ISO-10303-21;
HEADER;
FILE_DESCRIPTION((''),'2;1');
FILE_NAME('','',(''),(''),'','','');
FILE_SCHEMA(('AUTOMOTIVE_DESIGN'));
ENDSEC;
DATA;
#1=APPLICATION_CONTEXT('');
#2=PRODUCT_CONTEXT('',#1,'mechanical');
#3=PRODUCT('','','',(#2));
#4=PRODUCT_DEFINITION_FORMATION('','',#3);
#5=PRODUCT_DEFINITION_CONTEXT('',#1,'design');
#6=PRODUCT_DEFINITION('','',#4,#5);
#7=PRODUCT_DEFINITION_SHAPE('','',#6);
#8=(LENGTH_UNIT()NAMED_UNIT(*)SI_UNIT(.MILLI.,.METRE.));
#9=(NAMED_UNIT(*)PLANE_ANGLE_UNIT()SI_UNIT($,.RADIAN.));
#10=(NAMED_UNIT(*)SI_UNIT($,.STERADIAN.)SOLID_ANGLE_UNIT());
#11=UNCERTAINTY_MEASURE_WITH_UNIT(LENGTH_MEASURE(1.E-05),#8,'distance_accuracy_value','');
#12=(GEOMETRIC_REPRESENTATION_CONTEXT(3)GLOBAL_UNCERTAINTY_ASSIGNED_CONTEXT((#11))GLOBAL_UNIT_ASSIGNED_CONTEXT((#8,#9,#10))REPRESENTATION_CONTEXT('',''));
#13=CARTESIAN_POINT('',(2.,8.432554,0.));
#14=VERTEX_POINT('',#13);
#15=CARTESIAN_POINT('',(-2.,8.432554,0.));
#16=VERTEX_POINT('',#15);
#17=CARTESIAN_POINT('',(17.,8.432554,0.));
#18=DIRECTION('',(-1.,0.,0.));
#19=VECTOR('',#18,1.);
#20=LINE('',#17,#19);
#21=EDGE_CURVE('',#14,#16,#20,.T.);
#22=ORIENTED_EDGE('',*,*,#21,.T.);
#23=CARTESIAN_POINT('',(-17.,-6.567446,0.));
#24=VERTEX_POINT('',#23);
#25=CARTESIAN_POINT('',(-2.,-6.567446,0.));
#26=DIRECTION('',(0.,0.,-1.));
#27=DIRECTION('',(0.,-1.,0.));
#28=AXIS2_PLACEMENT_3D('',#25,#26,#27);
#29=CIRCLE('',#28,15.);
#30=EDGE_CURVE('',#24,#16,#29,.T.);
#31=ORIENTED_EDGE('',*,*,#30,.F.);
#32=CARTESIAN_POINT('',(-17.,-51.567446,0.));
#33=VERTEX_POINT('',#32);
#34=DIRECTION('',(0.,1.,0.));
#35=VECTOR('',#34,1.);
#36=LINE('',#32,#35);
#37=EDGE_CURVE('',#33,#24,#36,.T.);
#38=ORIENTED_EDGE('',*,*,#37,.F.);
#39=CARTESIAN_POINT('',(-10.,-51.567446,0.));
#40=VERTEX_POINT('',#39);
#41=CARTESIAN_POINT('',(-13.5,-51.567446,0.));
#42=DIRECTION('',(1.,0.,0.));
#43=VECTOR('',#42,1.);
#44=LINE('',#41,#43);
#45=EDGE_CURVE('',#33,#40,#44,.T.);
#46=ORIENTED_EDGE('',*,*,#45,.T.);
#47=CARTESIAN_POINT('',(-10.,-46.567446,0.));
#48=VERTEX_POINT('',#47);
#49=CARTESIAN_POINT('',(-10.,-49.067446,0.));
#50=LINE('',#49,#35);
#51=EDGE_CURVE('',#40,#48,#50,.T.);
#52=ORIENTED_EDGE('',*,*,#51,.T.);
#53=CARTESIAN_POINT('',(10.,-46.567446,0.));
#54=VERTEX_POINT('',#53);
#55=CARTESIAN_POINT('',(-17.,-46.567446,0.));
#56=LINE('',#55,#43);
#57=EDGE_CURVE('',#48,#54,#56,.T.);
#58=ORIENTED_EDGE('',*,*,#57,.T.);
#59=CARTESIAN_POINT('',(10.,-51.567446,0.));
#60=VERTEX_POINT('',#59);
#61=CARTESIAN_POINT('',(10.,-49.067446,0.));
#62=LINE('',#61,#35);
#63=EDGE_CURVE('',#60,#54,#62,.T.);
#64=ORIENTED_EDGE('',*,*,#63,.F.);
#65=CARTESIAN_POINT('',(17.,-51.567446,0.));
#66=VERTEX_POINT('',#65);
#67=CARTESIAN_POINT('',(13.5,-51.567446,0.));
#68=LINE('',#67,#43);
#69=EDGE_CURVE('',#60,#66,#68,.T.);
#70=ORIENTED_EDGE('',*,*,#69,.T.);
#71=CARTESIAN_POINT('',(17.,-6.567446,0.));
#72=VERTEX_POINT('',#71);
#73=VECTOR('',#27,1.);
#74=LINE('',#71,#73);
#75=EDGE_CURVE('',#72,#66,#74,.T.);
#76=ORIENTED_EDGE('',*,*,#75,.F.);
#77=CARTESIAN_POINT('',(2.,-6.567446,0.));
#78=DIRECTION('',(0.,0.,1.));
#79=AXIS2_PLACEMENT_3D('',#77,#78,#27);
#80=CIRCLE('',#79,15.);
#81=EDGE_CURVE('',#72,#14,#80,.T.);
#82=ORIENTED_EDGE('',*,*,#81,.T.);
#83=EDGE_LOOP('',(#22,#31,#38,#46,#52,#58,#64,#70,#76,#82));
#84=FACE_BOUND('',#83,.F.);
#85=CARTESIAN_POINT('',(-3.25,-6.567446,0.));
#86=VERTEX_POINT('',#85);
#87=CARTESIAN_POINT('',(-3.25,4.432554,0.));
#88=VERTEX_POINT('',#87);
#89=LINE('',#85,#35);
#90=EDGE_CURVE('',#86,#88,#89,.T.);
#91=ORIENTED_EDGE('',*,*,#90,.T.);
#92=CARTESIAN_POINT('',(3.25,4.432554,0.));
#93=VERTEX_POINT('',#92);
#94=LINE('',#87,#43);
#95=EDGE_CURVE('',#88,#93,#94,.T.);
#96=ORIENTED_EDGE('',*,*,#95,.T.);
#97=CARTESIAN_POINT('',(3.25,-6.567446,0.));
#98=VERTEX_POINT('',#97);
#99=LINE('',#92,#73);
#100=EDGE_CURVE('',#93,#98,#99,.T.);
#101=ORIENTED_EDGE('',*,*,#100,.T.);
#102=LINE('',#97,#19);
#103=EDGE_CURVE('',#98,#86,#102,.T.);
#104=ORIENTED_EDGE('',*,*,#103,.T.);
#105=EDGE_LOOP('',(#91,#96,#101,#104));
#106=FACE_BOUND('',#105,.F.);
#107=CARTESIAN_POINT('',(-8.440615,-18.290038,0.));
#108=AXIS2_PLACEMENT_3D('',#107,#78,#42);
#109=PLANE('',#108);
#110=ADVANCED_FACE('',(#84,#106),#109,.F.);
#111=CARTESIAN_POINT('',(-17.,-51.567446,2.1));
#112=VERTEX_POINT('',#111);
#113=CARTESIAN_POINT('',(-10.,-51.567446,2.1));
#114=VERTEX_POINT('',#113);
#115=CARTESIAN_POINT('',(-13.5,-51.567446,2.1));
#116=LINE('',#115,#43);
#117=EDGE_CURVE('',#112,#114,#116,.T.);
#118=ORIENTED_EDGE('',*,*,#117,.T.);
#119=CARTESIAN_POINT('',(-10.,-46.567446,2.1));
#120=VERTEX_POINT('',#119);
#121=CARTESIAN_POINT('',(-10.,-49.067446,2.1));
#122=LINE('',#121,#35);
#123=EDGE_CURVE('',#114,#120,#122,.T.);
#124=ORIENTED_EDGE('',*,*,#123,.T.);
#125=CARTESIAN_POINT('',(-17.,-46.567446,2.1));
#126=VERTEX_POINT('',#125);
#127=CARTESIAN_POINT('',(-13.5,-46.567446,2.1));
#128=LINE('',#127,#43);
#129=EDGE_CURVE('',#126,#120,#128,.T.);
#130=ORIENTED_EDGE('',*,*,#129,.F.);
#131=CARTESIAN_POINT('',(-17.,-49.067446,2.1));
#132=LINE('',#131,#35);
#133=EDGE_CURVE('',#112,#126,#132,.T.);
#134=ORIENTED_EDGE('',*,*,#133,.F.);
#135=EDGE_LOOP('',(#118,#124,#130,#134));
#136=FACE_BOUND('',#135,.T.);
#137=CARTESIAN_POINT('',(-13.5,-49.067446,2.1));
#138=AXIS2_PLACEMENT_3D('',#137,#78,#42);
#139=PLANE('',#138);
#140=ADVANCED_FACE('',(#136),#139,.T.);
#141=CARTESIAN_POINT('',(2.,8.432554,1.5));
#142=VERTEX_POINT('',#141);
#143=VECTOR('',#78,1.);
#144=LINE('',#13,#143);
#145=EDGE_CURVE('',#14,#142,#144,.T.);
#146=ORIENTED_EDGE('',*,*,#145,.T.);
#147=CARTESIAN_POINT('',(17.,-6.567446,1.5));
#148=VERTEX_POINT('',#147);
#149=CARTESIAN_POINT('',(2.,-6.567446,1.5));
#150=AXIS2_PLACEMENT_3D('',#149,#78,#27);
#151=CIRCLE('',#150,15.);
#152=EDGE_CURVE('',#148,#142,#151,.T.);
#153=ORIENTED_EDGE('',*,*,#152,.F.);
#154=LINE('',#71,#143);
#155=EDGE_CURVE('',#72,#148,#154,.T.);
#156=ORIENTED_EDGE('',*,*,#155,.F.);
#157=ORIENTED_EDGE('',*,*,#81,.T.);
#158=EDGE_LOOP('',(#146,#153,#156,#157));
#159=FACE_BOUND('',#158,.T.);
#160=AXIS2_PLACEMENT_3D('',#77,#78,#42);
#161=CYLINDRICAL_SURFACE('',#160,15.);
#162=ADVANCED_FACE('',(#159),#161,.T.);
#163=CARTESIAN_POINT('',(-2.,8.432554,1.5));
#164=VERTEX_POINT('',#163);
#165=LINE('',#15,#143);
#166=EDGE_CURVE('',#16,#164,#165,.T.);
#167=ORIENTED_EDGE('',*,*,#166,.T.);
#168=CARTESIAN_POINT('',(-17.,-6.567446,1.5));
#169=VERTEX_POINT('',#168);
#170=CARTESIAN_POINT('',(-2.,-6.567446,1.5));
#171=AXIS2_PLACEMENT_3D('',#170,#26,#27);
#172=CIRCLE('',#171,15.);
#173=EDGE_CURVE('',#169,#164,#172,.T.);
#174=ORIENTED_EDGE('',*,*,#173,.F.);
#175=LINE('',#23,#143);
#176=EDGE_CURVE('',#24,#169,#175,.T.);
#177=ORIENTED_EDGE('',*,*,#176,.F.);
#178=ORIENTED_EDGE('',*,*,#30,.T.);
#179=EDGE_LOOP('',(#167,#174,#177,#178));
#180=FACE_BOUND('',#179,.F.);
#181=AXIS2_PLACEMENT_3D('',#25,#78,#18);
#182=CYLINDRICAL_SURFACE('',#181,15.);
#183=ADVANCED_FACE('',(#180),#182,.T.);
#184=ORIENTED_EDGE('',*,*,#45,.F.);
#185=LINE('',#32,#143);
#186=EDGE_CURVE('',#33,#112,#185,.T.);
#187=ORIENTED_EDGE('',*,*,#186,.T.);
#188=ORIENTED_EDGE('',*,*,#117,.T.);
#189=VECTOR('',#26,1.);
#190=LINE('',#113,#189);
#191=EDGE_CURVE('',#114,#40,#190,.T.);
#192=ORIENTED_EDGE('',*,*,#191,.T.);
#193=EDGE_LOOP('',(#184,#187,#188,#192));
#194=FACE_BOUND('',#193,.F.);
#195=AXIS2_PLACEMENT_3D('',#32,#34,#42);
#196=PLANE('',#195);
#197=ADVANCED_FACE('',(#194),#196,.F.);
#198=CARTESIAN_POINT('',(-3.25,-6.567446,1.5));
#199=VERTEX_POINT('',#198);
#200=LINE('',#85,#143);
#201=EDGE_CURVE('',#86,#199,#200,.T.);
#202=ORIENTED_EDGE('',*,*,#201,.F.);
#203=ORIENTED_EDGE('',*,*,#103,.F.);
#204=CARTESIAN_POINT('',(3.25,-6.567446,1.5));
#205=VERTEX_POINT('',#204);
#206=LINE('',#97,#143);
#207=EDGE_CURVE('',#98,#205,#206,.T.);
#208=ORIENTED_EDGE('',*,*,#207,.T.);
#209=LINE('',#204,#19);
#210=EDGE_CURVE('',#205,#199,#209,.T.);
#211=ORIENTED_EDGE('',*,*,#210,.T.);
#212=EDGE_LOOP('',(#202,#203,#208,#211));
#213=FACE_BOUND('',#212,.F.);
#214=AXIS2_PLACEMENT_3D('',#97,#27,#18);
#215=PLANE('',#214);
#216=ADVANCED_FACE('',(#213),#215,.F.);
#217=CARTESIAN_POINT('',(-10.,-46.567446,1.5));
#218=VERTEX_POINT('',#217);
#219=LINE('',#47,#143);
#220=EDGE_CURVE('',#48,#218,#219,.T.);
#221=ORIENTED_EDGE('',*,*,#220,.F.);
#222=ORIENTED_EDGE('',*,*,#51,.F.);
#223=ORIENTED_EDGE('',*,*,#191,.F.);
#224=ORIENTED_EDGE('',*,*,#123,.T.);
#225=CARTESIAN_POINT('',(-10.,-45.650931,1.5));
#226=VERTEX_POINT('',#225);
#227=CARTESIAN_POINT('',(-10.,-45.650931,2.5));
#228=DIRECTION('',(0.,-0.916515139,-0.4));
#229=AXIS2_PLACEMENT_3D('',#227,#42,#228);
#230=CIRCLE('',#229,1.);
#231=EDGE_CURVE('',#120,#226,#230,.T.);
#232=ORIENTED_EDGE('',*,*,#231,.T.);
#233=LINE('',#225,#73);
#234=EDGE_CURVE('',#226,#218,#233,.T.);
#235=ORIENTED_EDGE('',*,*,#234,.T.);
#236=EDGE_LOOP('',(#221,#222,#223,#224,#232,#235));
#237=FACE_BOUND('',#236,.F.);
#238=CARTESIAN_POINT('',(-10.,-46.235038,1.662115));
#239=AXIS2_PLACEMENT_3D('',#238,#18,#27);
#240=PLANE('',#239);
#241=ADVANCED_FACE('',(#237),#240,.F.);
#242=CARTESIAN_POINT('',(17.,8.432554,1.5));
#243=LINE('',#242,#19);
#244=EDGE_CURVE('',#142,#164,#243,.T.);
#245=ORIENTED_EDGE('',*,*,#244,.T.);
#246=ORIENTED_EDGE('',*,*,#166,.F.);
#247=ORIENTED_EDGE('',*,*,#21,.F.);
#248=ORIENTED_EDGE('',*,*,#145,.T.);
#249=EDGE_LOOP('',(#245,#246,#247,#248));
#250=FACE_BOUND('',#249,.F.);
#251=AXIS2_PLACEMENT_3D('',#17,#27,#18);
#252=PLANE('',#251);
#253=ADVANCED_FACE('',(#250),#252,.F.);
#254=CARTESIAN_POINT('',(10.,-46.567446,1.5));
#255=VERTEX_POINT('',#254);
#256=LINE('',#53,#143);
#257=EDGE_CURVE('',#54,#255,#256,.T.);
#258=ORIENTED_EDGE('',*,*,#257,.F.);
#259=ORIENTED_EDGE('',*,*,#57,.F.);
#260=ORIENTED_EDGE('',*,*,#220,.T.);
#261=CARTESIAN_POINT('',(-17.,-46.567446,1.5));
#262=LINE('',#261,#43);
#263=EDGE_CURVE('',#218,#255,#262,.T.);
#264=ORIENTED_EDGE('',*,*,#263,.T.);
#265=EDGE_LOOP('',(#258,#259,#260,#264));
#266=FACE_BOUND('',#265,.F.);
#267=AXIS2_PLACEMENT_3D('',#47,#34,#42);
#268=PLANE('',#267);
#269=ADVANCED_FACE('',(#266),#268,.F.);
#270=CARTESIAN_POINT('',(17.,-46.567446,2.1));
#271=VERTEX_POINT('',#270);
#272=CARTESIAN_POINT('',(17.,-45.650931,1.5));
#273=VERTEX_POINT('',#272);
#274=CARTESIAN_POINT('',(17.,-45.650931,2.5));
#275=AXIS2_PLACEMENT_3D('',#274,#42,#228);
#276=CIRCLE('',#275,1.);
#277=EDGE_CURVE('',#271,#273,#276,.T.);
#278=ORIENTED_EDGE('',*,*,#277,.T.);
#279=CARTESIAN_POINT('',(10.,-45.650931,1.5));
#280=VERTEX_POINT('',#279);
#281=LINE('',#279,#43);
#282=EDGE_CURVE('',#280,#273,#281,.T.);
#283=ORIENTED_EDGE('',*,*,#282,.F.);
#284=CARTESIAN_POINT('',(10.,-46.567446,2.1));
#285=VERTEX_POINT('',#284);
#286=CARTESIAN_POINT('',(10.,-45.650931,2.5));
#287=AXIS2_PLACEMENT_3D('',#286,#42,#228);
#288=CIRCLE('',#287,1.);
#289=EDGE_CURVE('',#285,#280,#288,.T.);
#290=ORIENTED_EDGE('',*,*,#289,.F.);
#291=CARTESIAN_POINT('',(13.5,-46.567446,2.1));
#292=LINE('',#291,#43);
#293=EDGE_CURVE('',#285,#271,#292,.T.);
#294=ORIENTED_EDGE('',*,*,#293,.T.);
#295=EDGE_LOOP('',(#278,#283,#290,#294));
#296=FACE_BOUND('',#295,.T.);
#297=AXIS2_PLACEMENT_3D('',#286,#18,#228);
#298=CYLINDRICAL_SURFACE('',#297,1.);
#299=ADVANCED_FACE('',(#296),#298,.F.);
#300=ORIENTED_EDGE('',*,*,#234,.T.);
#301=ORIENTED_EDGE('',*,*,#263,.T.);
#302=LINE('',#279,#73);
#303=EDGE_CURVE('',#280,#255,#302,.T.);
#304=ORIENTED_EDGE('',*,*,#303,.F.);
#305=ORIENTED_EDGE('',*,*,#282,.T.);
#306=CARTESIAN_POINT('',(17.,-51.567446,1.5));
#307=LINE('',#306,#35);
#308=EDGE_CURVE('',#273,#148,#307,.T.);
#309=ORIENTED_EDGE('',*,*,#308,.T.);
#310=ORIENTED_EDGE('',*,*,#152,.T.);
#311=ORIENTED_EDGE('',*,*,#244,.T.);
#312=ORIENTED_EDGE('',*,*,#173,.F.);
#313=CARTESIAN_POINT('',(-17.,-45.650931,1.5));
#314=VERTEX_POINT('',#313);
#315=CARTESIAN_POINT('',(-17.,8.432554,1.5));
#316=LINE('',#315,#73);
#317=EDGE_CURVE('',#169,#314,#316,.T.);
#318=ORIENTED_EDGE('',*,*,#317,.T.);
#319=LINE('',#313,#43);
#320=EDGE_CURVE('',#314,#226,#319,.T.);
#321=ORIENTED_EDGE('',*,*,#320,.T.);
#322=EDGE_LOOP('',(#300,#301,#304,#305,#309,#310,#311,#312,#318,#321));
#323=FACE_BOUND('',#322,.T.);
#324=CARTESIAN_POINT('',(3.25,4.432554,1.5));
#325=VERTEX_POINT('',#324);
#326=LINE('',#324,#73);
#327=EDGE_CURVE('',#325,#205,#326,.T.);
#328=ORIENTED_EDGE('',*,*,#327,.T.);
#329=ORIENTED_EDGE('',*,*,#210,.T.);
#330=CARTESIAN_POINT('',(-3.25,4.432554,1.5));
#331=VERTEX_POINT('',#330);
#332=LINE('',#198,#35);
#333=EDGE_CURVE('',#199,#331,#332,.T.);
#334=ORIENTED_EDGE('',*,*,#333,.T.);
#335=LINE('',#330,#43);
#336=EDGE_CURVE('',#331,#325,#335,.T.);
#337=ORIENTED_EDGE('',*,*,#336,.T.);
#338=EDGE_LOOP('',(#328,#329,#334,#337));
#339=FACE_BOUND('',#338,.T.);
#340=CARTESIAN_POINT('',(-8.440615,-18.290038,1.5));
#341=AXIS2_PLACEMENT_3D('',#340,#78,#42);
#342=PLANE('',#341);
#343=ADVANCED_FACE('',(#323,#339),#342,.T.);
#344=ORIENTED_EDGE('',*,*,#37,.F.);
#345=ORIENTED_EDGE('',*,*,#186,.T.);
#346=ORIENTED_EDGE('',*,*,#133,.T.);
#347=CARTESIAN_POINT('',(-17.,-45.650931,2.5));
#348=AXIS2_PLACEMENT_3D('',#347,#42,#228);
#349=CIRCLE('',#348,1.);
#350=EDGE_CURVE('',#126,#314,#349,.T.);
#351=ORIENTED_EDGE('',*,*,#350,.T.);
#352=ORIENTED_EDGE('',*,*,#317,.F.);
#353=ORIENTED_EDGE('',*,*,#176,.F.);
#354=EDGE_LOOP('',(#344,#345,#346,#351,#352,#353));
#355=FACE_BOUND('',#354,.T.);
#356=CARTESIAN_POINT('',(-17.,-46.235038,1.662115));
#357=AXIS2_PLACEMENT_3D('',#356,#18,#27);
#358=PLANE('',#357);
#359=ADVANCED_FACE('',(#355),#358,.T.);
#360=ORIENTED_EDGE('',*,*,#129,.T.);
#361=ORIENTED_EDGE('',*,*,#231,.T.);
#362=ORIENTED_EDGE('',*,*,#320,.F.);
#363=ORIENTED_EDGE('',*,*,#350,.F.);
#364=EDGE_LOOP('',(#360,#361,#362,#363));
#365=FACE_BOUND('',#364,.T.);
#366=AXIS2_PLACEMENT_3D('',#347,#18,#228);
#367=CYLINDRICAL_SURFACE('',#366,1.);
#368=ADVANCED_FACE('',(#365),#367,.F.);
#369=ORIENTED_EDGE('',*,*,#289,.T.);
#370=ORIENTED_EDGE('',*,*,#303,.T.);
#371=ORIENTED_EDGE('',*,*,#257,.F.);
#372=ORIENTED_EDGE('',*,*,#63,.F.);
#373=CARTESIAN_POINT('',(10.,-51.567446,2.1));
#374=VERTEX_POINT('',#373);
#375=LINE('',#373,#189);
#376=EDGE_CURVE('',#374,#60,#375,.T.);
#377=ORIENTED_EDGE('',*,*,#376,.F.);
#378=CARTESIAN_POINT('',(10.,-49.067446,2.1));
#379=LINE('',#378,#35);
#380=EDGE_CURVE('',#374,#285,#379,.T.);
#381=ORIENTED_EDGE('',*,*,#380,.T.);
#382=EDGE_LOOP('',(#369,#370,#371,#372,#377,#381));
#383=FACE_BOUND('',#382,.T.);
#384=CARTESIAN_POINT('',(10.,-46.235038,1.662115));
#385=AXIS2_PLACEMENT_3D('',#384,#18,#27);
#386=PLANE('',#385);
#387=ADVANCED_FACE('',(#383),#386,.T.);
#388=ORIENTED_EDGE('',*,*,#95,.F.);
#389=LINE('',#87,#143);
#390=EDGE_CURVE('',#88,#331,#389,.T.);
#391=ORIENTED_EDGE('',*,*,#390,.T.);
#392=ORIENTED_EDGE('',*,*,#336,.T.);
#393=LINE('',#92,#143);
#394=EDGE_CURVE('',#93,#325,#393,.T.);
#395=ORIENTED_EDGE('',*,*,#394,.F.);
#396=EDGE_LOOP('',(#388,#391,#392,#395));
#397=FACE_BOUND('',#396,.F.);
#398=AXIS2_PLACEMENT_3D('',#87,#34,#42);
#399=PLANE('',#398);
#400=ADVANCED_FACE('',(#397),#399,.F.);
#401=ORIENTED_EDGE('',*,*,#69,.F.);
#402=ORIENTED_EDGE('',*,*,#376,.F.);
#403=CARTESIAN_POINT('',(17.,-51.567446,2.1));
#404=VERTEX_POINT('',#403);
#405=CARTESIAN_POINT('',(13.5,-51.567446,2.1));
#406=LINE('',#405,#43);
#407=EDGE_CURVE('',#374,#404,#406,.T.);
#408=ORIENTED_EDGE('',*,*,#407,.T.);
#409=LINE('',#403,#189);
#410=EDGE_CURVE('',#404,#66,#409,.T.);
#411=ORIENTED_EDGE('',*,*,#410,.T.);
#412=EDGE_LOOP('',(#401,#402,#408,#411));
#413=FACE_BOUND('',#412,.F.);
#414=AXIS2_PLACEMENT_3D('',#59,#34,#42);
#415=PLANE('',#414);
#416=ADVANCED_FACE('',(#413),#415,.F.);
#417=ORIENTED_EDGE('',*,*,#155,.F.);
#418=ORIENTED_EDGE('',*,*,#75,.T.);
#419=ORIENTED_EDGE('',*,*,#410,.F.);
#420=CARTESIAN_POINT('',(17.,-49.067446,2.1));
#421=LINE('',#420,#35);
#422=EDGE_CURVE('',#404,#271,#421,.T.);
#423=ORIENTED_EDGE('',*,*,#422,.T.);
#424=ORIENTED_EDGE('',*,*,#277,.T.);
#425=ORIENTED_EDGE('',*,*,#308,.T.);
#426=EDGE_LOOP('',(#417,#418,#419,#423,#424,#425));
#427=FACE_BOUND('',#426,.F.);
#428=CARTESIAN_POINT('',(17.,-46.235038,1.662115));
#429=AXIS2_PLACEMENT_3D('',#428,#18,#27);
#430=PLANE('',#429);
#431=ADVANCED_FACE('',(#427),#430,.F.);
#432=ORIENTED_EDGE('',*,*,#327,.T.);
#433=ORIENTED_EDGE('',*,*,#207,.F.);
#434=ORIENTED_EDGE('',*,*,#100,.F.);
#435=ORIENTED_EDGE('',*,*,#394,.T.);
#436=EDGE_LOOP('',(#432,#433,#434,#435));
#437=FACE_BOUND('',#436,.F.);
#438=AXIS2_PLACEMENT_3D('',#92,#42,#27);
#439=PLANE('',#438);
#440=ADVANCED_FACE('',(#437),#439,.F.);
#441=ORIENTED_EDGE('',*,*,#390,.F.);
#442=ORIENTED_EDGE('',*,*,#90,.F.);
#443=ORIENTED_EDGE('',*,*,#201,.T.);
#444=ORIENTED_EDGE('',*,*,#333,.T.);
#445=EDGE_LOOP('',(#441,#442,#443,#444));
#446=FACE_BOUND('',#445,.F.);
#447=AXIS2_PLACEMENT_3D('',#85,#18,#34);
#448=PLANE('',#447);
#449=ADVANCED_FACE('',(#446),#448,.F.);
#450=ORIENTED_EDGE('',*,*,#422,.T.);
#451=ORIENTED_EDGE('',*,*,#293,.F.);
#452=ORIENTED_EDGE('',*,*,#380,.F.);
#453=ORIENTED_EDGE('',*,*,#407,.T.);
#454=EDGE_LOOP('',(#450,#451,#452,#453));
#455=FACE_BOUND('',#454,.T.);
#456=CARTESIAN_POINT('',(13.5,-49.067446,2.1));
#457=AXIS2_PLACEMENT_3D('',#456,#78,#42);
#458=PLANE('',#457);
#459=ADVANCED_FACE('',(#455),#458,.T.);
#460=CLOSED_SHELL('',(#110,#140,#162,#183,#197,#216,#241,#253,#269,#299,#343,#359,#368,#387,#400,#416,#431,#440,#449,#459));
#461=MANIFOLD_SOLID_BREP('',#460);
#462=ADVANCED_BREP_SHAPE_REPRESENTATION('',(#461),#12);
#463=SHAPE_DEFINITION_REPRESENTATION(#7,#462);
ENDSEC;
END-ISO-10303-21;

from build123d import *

# Parameters (mm, degrees)
F0_W        = 7
F0_H        = 5
F1_DEPTH    = 1.5
F2_R        = 15
F3_DEPTH    = 2.1
F4_T1_DEPTH = 7
F4_T3_DEPTH = 7


# Not quite as in the source:
# - a fillet or chamfer that OpenCascade refuses, or shapes differently, is made with other operations: its cross-section is extruded or revolved along the edge and cut away or added


with BuildPart() as f1:
    # F0 (on Top) → F1 (new body)
    with BuildSketch(Plane.XY):
        Polygon((0, 8.4325535595), (-17, 8.4325535595), (-17, -46.5674464405), (-10, -46.5674464405), (0, -46.5674464405), (0, -6.5674464405), (-3.25, -6.5674464405), (-3.25, 4.4325535595), (0, 4.4325535595), align=None)
        Polygon((17, 8.4325535595), (0, 8.4325535595), (0, 4.4325535595), (3.25, 4.4325535595), (3.25, -6.5674464405), (0, -6.5674464405), (0, -46.5674464405), (10, -46.5674464405), (17, -46.5674464405), align=None)
        with Locations((13.5, -49.0674464405)):
            Rectangle(F0_W, F0_H)
        with Locations((-13.5, -49.0674464405)):
            Rectangle(F0_W, F0_H)
    extrude(amount=F1_DEPTH)

    # F2
    f2_edges = [f1.edges().sort_by_distance(p)[0] for p in [
        (17, 8.432554, 0.75),
        (-17, 8.432554, 0.75),
    ]]
    fillet(f2_edges, radius=F2_R)

    # F0 (on Top) → F3 (join)
    with BuildSketch(Plane.XY):
        with Locations((13.5, -49.0674464405)):
            Rectangle(F0_W, F0_H)
        with Locations((-13.5, -49.0674464405)):
            Rectangle(F0_W, F0_H)
    extrude(amount=F3_DEPTH)

    # F4: fillet of radius 1 on 2 edges, made by hand

    # F4_s2 → F4_t1 (join)
    with BuildSketch(Plane.YZ.offset(-17)):
        with BuildLine():
            ThreePointArc((-46.5674464405, 2.1), (-46.198653859, 1.6633399735), (-45.6509313015, 1.5))
            Line((-45.6509313015, 1.5), (-46.5674464405, 1.5))
            Line((-46.5674464405, 1.5), (-46.5674464405, 2.1))
        make_face()
    extrude(amount=F4_T1_DEPTH)

    # F4_s4 → F4_t3 (join)
    with BuildSketch(Plane.YZ.offset(10)):
        with BuildLine():
            ThreePointArc((-46.5674464405, 2.1), (-46.198653859, 1.6633399735), (-45.6509313015, 1.5))
            Line((-45.6509313015, 1.5), (-46.5674464405, 1.5))
            Line((-46.5674464405, 1.5), (-46.5674464405, 2.1))
        make_face()
    extrude(amount=F4_T3_DEPTH)


solid = f1.part
